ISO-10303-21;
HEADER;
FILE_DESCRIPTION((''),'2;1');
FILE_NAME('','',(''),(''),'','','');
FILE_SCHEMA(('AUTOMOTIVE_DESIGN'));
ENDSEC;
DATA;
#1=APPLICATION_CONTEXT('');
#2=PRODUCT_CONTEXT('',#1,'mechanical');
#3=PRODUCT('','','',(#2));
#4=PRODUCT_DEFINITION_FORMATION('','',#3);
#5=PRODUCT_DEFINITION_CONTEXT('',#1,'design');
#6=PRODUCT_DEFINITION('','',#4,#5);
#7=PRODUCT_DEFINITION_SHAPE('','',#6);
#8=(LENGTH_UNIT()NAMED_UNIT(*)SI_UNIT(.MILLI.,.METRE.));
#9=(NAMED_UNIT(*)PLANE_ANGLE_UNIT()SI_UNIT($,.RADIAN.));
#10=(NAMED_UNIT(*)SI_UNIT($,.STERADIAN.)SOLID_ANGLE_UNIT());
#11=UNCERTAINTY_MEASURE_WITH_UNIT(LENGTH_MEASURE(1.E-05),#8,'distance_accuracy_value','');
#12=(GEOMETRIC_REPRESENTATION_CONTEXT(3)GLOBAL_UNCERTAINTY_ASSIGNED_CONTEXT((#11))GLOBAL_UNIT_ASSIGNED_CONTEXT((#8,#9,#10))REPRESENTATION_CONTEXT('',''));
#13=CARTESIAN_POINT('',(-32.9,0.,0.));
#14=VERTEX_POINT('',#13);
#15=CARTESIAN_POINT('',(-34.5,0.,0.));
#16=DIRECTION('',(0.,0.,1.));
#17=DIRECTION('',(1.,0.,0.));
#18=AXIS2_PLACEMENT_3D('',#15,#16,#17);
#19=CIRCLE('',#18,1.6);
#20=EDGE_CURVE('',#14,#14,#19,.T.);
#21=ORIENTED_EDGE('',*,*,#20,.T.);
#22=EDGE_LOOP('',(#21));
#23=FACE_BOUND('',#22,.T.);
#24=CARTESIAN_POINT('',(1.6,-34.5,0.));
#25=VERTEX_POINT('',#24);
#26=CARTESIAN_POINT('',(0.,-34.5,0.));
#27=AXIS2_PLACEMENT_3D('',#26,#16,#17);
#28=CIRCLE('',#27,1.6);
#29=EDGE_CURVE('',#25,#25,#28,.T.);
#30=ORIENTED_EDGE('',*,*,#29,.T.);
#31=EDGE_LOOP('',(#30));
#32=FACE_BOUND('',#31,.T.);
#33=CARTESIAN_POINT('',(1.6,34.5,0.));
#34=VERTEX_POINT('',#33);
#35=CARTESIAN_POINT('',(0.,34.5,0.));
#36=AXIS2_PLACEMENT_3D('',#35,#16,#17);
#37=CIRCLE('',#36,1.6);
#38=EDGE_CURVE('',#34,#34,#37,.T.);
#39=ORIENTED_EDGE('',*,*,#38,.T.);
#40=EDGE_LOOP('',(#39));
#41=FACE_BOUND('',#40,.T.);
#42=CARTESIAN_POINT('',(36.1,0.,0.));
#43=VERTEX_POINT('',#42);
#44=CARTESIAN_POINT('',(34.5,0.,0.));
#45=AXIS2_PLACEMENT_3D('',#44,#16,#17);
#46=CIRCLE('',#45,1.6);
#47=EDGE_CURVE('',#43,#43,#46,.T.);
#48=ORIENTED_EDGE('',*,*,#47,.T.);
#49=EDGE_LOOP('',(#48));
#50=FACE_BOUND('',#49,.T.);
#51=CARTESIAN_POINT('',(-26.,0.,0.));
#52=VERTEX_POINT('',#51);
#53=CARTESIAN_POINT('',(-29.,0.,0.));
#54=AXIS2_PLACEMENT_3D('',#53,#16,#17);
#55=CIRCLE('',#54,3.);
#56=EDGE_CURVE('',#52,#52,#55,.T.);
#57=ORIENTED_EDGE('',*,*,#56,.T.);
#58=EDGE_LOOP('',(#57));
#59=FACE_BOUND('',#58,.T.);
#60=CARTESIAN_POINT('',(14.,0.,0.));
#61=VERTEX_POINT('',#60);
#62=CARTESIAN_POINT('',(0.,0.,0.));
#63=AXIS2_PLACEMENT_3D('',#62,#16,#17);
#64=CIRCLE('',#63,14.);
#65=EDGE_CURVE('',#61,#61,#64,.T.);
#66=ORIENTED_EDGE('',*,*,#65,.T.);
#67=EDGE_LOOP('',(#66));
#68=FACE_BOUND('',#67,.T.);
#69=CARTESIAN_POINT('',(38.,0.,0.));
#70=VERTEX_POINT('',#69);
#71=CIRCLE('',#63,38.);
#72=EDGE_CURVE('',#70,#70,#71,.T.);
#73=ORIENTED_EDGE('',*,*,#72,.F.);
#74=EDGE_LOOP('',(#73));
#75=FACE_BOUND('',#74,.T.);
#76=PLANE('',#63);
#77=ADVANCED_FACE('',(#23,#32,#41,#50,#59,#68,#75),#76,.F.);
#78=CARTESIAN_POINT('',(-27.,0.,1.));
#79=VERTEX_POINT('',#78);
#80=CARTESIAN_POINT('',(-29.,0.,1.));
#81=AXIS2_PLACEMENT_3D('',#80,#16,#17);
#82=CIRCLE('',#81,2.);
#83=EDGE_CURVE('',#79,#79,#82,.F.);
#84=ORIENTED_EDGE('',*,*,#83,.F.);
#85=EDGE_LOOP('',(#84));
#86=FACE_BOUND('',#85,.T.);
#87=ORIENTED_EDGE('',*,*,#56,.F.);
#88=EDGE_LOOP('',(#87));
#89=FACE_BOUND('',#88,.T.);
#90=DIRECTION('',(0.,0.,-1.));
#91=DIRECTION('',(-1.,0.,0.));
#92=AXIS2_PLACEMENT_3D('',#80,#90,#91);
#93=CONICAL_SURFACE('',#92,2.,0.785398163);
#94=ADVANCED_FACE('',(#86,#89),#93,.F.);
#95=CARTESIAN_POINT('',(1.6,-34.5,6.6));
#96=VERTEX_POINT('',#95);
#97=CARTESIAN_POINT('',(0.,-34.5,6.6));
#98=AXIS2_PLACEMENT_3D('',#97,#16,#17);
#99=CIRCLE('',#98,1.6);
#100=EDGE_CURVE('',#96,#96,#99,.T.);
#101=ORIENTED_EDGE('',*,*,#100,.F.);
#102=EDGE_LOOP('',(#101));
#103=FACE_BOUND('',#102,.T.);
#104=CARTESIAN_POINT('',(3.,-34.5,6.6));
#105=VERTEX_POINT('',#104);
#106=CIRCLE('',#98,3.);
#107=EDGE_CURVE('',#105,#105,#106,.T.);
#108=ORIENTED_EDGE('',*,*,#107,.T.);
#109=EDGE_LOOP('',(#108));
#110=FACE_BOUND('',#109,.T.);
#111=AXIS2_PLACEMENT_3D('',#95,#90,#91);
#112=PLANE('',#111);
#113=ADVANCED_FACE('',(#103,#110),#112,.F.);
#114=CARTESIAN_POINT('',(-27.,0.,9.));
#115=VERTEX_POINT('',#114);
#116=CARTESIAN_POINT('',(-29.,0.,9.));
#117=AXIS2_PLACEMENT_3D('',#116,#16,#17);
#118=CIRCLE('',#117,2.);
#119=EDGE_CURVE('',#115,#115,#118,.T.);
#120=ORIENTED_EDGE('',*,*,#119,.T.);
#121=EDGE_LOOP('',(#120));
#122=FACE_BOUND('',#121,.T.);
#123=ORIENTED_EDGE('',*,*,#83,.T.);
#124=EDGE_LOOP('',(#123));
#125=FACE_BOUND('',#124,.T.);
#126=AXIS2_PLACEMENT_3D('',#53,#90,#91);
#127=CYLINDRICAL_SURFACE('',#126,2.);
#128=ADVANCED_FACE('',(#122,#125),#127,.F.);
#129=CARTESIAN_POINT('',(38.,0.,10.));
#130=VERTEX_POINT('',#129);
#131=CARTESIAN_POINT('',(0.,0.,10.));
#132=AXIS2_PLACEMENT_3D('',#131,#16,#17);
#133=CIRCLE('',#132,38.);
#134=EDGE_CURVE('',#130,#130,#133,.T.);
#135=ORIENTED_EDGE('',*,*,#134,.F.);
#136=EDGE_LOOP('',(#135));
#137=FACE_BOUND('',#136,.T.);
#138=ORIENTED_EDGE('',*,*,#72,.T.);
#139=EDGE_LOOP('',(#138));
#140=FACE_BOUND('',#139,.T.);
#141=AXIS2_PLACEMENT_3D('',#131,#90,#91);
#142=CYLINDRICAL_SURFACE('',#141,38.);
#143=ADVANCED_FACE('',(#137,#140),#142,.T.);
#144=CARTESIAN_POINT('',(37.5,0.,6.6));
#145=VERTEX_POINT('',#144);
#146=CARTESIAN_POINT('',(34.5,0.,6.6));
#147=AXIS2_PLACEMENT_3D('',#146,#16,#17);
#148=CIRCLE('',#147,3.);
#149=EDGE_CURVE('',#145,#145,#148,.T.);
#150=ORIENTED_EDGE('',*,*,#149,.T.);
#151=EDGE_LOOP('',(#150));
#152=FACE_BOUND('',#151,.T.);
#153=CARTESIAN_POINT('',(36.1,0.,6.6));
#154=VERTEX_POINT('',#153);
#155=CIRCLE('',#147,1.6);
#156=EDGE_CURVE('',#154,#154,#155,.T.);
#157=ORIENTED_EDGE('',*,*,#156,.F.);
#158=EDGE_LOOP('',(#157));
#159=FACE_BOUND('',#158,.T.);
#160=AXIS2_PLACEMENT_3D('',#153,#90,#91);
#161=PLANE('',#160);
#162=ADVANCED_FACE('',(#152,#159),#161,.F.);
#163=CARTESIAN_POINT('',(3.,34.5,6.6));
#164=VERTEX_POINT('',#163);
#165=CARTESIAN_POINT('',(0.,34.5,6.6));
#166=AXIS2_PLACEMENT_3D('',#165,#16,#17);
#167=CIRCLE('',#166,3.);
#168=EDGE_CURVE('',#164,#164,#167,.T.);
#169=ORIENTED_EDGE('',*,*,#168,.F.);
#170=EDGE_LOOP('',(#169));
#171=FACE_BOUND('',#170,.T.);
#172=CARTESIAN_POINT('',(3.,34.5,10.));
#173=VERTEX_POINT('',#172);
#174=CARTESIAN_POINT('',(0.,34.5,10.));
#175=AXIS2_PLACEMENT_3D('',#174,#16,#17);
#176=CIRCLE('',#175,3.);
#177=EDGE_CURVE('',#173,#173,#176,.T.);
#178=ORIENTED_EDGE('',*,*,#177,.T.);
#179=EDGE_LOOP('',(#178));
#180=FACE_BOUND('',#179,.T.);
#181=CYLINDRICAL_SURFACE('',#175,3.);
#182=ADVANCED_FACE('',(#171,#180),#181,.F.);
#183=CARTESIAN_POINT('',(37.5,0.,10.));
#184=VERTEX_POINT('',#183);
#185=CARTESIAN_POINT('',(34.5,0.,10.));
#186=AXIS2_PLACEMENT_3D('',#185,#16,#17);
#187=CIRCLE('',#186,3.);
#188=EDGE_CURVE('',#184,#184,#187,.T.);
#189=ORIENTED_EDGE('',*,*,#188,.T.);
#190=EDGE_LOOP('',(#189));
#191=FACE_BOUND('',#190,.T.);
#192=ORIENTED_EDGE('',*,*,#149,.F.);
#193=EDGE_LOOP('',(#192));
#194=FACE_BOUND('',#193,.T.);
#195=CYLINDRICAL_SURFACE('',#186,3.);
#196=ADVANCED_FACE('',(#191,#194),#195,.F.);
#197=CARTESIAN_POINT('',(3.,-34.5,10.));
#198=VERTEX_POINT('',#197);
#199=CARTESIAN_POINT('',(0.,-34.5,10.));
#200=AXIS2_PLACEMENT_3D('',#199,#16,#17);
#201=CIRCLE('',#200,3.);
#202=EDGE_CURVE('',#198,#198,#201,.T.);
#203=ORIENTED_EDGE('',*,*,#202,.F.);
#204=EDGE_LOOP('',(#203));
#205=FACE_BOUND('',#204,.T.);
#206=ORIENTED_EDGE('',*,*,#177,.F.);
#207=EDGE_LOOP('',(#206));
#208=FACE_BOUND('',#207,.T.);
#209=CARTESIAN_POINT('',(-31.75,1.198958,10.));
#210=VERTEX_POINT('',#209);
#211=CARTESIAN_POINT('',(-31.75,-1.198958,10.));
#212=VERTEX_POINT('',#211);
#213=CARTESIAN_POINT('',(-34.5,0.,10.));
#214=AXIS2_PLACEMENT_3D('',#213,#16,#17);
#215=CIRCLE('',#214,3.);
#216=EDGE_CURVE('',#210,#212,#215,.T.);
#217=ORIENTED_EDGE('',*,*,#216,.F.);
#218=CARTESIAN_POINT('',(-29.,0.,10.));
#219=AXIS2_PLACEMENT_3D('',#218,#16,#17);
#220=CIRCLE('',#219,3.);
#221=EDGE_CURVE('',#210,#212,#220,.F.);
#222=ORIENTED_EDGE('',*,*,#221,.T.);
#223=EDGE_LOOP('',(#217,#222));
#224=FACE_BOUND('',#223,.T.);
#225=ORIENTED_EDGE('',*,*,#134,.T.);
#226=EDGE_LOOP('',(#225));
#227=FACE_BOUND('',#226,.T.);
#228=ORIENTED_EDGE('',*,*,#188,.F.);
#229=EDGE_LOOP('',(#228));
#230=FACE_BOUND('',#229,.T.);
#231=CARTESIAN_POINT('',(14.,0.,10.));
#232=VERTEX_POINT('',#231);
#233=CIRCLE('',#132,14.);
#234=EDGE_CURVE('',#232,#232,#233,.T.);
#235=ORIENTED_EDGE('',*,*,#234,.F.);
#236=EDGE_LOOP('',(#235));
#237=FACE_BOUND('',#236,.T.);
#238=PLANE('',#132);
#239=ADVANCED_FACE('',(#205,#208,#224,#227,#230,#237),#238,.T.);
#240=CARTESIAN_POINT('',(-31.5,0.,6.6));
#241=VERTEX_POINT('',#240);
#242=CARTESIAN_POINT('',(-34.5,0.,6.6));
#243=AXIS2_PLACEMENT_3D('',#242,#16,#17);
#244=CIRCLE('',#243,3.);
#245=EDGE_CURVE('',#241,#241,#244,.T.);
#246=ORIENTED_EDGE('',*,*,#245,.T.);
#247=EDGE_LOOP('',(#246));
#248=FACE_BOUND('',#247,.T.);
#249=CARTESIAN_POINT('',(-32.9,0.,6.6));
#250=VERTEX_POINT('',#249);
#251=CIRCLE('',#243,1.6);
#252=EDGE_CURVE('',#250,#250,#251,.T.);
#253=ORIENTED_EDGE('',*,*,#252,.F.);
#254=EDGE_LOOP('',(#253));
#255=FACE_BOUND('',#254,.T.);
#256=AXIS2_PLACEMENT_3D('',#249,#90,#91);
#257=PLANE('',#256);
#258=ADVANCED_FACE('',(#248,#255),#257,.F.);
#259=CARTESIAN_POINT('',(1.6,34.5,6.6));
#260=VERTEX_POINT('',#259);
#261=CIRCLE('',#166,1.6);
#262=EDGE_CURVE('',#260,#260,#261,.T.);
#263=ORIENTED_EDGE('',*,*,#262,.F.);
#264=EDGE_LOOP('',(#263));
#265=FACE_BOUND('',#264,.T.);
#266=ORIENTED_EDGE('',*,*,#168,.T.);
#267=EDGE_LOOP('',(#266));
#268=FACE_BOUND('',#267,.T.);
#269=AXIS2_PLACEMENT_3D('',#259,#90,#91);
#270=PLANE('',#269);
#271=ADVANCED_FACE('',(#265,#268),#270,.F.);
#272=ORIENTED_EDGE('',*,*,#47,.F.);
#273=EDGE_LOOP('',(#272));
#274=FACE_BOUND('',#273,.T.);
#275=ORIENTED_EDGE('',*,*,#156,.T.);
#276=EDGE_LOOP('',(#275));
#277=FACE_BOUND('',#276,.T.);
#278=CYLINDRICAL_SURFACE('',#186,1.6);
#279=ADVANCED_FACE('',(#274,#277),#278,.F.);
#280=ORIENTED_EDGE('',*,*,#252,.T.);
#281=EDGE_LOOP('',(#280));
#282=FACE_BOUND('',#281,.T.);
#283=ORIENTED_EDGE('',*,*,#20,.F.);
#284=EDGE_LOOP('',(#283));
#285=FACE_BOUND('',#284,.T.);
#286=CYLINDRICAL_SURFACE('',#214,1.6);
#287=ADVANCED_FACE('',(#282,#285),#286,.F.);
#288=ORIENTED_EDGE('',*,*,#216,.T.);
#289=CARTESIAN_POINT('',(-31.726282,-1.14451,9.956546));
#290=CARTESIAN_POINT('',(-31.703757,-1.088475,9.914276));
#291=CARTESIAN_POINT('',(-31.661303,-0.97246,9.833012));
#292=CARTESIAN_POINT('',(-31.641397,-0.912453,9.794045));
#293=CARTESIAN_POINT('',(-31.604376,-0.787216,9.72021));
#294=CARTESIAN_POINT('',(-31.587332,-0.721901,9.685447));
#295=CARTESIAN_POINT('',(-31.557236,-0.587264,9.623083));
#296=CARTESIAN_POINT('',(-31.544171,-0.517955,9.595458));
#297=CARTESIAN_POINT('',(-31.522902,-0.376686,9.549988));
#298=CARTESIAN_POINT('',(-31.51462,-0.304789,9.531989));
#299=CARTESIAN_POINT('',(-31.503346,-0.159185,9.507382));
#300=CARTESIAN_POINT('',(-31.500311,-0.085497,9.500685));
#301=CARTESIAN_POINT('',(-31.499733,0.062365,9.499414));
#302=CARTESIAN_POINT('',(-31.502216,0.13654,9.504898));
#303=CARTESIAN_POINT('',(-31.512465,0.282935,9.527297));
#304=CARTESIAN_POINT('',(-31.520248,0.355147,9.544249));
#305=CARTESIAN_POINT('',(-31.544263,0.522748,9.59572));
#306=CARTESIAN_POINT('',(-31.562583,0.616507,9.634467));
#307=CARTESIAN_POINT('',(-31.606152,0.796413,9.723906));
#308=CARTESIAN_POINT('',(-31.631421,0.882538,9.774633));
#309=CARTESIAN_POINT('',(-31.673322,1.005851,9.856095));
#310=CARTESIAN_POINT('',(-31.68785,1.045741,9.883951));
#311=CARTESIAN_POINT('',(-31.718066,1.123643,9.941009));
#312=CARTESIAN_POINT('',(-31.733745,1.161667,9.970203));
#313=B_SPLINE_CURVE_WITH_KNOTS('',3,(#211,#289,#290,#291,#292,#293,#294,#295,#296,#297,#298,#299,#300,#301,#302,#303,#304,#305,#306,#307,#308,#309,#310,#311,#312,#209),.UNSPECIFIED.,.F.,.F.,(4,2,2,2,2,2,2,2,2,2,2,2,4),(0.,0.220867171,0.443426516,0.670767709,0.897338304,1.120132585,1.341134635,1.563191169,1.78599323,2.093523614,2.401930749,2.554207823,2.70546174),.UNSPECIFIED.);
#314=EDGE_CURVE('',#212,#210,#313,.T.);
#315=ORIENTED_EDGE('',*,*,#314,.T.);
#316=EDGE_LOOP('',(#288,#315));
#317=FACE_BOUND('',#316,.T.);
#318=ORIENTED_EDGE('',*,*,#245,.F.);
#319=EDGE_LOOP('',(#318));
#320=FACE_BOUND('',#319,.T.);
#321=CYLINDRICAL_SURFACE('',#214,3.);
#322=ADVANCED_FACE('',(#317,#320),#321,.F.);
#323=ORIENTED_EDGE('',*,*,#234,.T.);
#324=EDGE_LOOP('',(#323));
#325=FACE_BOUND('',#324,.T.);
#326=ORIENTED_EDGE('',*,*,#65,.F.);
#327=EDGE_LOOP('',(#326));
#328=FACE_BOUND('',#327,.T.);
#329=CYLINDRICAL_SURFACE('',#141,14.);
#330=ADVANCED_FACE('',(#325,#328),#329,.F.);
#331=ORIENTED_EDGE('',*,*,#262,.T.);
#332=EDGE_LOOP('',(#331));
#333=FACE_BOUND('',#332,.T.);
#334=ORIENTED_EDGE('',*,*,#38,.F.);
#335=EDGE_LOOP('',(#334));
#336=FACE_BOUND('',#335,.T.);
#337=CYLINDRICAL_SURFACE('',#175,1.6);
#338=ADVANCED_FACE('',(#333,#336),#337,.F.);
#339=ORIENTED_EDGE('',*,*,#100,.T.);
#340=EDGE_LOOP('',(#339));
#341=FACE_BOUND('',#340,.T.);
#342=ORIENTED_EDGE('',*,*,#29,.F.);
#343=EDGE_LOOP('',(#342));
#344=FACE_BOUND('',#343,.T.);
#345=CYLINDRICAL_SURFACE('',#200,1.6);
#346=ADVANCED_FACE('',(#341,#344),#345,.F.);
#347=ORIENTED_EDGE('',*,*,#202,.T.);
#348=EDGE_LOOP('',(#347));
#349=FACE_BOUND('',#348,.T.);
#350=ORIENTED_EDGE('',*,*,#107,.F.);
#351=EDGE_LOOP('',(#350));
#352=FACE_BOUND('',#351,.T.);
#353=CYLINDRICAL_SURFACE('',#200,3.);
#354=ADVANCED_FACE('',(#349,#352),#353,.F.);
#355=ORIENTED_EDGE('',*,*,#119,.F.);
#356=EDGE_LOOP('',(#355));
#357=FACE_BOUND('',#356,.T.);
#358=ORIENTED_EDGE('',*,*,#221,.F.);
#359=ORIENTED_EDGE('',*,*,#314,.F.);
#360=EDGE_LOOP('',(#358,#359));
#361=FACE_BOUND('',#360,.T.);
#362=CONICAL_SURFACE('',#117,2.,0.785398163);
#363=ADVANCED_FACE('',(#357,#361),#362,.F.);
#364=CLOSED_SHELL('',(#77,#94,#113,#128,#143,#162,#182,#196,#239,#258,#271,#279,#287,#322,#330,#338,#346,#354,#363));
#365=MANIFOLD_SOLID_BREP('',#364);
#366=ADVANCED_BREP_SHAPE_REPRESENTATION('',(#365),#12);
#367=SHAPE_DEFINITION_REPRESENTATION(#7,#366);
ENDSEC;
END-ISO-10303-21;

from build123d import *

# Parameters (mm, degrees)
SKETCH_1_R                = 38
SKETCH_1_R_2              = 14
EXTRUDE_1_DEPTH           = 10
HOLE_WIZARD_1_D           = 3.2
HOLE_WIZARD_1_CBORE_D     = 6
HOLE_WIZARD_1_CBORE_DEPTH = 3.4
HOLE_WIZARD_4_0_4_1_D     = 4
CHAMFER_1_SIZE            = 1


with BuildPart() as part:
    # 草图1 → 凸台-拉伸1 (new body)
    with BuildSketch(Plane.XY):
        Circle(SKETCH_1_R)
        Circle(SKETCH_1_R_2, mode=Mode.SUBTRACT)
    extrude(amount=EXTRUDE_1_DEPTH)

    # 打孔尺寸(%根据)内六角圆柱头螺钉的类型1 (through all)
    with Locations(Plane.XY.offset(10)):
        with Locations((0, 34.5), (34.5, 0), (0, -34.5), (-34.5, 0)):
            CounterBoreHole(HOLE_WIZARD_1_D / 2, HOLE_WIZARD_1_CBORE_D / 2, HOLE_WIZARD_1_CBORE_DEPTH)

    # Ø4.0 (4) 直径孔1 (through all)
    with Locations(Plane(origin=(0, 0, 0), x_dir=(-1, 0, 0), z_dir=(0, 0, -1))):
        with Locations((29, 0)):
            Hole(HOLE_WIZARD_4_0_4_1_D / 2)

    # 倒角1
    # the kernel refuses this chamfer: 1 mm, written as the material it takes off along each edge
    with BuildSketch(Plane(origin=(-29, 0, 0), x_dir=(1, 0, 0), z_dir=(0, -1, 0))) as chamfer_1_piece_1:
        Polygon((2 + CHAMFER_1_SIZE, 0), (2, CHAMFER_1_SIZE), (2, 0), align=None)
    revolve(axis=Axis((-29, 0, 0), (0, 0, 1)), mode=Mode.SUBTRACT)
    with BuildSketch(Plane(origin=(-29, 0, 10), x_dir=(1, 0, 0), z_dir=(0, -1, 0))) as chamfer_1_piece_2:
        Polygon((2 + CHAMFER_1_SIZE, 0), (2, -CHAMFER_1_SIZE), (2, 0), align=None)
    revolve(axis=Axis((-29, 0, 10), (0, 0, 1)), mode=Mode.SUBTRACT)


solid = part.part
